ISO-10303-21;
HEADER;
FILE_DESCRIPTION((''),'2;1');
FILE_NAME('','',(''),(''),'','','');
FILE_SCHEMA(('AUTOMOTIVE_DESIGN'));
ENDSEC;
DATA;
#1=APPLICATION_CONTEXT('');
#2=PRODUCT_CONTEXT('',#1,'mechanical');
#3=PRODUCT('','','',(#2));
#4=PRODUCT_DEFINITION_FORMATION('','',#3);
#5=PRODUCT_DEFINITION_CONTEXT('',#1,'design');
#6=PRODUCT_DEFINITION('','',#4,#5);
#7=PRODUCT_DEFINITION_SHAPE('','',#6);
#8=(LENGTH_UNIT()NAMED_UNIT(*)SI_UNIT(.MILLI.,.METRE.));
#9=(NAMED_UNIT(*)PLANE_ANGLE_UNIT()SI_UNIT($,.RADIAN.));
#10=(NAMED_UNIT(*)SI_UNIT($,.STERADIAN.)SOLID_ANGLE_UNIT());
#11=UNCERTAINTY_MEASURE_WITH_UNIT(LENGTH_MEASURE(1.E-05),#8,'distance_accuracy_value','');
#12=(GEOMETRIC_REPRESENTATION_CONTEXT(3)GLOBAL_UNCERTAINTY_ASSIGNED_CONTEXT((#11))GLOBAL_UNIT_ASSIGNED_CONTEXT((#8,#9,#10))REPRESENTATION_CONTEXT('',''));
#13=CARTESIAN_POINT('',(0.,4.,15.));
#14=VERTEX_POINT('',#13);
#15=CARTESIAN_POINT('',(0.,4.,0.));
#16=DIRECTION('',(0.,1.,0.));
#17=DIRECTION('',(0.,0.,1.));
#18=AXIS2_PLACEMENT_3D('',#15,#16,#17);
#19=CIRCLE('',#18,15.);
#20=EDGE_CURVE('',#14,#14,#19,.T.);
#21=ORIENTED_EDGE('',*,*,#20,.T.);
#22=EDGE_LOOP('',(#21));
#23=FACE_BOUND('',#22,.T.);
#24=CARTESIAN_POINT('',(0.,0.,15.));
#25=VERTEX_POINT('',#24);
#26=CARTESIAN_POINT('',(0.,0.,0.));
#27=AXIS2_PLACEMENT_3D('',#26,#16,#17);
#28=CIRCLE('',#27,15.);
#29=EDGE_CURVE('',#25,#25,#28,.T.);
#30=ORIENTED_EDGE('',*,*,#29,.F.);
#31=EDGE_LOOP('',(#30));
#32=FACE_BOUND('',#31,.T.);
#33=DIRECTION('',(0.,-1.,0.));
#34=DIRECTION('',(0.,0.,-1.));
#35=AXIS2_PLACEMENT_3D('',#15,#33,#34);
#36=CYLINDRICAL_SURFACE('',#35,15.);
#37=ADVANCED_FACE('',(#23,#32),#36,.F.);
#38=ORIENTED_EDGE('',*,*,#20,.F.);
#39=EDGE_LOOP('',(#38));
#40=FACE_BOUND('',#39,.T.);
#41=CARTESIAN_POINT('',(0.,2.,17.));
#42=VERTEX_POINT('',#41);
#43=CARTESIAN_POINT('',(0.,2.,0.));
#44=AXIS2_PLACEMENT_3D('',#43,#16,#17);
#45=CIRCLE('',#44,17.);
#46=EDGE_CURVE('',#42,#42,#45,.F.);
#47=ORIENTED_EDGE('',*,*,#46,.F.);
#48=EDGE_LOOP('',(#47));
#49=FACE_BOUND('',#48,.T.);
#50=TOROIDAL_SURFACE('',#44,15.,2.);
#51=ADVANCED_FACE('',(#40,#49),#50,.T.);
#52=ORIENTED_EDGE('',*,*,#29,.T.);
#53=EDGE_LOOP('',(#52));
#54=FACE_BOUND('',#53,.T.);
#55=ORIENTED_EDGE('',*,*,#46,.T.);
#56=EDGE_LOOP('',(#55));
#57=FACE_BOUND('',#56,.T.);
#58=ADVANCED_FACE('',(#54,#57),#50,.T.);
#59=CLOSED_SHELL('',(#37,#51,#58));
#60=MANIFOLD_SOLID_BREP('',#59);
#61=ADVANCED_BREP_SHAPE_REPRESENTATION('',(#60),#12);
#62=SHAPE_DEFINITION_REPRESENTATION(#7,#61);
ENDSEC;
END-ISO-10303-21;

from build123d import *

# Parameters (mm, degrees)
ESQUISSE1_R      = 17
ESQUISSE1_R_2    = 15
EXTRUSION1_DEPTH = 4
CONG_1_R         = 2


with BuildPart() as part:
    # Esquisse1 → Extrusion1 (new body)
    with BuildSketch(Plane(origin=(0, 0, 0), x_dir=(1, 0, 0), z_dir=(0, 1, 0))):
        with Locations(Location((0, 0, 0), (0, 0, 270))):
            Circle(ESQUISSE1_R)
        with Locations(Location((0, 0, 0), (0, 0, 270))):
            Circle(ESQUISSE1_R_2, mode=Mode.SUBTRACT)
    extrude(amount=EXTRUSION1_DEPTH)

    # Congé1
    cong_1_edges = [part.edges().sort_by_distance(p)[0] for p in [
        (0, 0, -17),
        (0, 4, -17),
    ]]
    fillet(cong_1_edges, radius=CONG_1_R - 0.0001)  # a hair under: the kernel refuses the full size


solid = part.part
